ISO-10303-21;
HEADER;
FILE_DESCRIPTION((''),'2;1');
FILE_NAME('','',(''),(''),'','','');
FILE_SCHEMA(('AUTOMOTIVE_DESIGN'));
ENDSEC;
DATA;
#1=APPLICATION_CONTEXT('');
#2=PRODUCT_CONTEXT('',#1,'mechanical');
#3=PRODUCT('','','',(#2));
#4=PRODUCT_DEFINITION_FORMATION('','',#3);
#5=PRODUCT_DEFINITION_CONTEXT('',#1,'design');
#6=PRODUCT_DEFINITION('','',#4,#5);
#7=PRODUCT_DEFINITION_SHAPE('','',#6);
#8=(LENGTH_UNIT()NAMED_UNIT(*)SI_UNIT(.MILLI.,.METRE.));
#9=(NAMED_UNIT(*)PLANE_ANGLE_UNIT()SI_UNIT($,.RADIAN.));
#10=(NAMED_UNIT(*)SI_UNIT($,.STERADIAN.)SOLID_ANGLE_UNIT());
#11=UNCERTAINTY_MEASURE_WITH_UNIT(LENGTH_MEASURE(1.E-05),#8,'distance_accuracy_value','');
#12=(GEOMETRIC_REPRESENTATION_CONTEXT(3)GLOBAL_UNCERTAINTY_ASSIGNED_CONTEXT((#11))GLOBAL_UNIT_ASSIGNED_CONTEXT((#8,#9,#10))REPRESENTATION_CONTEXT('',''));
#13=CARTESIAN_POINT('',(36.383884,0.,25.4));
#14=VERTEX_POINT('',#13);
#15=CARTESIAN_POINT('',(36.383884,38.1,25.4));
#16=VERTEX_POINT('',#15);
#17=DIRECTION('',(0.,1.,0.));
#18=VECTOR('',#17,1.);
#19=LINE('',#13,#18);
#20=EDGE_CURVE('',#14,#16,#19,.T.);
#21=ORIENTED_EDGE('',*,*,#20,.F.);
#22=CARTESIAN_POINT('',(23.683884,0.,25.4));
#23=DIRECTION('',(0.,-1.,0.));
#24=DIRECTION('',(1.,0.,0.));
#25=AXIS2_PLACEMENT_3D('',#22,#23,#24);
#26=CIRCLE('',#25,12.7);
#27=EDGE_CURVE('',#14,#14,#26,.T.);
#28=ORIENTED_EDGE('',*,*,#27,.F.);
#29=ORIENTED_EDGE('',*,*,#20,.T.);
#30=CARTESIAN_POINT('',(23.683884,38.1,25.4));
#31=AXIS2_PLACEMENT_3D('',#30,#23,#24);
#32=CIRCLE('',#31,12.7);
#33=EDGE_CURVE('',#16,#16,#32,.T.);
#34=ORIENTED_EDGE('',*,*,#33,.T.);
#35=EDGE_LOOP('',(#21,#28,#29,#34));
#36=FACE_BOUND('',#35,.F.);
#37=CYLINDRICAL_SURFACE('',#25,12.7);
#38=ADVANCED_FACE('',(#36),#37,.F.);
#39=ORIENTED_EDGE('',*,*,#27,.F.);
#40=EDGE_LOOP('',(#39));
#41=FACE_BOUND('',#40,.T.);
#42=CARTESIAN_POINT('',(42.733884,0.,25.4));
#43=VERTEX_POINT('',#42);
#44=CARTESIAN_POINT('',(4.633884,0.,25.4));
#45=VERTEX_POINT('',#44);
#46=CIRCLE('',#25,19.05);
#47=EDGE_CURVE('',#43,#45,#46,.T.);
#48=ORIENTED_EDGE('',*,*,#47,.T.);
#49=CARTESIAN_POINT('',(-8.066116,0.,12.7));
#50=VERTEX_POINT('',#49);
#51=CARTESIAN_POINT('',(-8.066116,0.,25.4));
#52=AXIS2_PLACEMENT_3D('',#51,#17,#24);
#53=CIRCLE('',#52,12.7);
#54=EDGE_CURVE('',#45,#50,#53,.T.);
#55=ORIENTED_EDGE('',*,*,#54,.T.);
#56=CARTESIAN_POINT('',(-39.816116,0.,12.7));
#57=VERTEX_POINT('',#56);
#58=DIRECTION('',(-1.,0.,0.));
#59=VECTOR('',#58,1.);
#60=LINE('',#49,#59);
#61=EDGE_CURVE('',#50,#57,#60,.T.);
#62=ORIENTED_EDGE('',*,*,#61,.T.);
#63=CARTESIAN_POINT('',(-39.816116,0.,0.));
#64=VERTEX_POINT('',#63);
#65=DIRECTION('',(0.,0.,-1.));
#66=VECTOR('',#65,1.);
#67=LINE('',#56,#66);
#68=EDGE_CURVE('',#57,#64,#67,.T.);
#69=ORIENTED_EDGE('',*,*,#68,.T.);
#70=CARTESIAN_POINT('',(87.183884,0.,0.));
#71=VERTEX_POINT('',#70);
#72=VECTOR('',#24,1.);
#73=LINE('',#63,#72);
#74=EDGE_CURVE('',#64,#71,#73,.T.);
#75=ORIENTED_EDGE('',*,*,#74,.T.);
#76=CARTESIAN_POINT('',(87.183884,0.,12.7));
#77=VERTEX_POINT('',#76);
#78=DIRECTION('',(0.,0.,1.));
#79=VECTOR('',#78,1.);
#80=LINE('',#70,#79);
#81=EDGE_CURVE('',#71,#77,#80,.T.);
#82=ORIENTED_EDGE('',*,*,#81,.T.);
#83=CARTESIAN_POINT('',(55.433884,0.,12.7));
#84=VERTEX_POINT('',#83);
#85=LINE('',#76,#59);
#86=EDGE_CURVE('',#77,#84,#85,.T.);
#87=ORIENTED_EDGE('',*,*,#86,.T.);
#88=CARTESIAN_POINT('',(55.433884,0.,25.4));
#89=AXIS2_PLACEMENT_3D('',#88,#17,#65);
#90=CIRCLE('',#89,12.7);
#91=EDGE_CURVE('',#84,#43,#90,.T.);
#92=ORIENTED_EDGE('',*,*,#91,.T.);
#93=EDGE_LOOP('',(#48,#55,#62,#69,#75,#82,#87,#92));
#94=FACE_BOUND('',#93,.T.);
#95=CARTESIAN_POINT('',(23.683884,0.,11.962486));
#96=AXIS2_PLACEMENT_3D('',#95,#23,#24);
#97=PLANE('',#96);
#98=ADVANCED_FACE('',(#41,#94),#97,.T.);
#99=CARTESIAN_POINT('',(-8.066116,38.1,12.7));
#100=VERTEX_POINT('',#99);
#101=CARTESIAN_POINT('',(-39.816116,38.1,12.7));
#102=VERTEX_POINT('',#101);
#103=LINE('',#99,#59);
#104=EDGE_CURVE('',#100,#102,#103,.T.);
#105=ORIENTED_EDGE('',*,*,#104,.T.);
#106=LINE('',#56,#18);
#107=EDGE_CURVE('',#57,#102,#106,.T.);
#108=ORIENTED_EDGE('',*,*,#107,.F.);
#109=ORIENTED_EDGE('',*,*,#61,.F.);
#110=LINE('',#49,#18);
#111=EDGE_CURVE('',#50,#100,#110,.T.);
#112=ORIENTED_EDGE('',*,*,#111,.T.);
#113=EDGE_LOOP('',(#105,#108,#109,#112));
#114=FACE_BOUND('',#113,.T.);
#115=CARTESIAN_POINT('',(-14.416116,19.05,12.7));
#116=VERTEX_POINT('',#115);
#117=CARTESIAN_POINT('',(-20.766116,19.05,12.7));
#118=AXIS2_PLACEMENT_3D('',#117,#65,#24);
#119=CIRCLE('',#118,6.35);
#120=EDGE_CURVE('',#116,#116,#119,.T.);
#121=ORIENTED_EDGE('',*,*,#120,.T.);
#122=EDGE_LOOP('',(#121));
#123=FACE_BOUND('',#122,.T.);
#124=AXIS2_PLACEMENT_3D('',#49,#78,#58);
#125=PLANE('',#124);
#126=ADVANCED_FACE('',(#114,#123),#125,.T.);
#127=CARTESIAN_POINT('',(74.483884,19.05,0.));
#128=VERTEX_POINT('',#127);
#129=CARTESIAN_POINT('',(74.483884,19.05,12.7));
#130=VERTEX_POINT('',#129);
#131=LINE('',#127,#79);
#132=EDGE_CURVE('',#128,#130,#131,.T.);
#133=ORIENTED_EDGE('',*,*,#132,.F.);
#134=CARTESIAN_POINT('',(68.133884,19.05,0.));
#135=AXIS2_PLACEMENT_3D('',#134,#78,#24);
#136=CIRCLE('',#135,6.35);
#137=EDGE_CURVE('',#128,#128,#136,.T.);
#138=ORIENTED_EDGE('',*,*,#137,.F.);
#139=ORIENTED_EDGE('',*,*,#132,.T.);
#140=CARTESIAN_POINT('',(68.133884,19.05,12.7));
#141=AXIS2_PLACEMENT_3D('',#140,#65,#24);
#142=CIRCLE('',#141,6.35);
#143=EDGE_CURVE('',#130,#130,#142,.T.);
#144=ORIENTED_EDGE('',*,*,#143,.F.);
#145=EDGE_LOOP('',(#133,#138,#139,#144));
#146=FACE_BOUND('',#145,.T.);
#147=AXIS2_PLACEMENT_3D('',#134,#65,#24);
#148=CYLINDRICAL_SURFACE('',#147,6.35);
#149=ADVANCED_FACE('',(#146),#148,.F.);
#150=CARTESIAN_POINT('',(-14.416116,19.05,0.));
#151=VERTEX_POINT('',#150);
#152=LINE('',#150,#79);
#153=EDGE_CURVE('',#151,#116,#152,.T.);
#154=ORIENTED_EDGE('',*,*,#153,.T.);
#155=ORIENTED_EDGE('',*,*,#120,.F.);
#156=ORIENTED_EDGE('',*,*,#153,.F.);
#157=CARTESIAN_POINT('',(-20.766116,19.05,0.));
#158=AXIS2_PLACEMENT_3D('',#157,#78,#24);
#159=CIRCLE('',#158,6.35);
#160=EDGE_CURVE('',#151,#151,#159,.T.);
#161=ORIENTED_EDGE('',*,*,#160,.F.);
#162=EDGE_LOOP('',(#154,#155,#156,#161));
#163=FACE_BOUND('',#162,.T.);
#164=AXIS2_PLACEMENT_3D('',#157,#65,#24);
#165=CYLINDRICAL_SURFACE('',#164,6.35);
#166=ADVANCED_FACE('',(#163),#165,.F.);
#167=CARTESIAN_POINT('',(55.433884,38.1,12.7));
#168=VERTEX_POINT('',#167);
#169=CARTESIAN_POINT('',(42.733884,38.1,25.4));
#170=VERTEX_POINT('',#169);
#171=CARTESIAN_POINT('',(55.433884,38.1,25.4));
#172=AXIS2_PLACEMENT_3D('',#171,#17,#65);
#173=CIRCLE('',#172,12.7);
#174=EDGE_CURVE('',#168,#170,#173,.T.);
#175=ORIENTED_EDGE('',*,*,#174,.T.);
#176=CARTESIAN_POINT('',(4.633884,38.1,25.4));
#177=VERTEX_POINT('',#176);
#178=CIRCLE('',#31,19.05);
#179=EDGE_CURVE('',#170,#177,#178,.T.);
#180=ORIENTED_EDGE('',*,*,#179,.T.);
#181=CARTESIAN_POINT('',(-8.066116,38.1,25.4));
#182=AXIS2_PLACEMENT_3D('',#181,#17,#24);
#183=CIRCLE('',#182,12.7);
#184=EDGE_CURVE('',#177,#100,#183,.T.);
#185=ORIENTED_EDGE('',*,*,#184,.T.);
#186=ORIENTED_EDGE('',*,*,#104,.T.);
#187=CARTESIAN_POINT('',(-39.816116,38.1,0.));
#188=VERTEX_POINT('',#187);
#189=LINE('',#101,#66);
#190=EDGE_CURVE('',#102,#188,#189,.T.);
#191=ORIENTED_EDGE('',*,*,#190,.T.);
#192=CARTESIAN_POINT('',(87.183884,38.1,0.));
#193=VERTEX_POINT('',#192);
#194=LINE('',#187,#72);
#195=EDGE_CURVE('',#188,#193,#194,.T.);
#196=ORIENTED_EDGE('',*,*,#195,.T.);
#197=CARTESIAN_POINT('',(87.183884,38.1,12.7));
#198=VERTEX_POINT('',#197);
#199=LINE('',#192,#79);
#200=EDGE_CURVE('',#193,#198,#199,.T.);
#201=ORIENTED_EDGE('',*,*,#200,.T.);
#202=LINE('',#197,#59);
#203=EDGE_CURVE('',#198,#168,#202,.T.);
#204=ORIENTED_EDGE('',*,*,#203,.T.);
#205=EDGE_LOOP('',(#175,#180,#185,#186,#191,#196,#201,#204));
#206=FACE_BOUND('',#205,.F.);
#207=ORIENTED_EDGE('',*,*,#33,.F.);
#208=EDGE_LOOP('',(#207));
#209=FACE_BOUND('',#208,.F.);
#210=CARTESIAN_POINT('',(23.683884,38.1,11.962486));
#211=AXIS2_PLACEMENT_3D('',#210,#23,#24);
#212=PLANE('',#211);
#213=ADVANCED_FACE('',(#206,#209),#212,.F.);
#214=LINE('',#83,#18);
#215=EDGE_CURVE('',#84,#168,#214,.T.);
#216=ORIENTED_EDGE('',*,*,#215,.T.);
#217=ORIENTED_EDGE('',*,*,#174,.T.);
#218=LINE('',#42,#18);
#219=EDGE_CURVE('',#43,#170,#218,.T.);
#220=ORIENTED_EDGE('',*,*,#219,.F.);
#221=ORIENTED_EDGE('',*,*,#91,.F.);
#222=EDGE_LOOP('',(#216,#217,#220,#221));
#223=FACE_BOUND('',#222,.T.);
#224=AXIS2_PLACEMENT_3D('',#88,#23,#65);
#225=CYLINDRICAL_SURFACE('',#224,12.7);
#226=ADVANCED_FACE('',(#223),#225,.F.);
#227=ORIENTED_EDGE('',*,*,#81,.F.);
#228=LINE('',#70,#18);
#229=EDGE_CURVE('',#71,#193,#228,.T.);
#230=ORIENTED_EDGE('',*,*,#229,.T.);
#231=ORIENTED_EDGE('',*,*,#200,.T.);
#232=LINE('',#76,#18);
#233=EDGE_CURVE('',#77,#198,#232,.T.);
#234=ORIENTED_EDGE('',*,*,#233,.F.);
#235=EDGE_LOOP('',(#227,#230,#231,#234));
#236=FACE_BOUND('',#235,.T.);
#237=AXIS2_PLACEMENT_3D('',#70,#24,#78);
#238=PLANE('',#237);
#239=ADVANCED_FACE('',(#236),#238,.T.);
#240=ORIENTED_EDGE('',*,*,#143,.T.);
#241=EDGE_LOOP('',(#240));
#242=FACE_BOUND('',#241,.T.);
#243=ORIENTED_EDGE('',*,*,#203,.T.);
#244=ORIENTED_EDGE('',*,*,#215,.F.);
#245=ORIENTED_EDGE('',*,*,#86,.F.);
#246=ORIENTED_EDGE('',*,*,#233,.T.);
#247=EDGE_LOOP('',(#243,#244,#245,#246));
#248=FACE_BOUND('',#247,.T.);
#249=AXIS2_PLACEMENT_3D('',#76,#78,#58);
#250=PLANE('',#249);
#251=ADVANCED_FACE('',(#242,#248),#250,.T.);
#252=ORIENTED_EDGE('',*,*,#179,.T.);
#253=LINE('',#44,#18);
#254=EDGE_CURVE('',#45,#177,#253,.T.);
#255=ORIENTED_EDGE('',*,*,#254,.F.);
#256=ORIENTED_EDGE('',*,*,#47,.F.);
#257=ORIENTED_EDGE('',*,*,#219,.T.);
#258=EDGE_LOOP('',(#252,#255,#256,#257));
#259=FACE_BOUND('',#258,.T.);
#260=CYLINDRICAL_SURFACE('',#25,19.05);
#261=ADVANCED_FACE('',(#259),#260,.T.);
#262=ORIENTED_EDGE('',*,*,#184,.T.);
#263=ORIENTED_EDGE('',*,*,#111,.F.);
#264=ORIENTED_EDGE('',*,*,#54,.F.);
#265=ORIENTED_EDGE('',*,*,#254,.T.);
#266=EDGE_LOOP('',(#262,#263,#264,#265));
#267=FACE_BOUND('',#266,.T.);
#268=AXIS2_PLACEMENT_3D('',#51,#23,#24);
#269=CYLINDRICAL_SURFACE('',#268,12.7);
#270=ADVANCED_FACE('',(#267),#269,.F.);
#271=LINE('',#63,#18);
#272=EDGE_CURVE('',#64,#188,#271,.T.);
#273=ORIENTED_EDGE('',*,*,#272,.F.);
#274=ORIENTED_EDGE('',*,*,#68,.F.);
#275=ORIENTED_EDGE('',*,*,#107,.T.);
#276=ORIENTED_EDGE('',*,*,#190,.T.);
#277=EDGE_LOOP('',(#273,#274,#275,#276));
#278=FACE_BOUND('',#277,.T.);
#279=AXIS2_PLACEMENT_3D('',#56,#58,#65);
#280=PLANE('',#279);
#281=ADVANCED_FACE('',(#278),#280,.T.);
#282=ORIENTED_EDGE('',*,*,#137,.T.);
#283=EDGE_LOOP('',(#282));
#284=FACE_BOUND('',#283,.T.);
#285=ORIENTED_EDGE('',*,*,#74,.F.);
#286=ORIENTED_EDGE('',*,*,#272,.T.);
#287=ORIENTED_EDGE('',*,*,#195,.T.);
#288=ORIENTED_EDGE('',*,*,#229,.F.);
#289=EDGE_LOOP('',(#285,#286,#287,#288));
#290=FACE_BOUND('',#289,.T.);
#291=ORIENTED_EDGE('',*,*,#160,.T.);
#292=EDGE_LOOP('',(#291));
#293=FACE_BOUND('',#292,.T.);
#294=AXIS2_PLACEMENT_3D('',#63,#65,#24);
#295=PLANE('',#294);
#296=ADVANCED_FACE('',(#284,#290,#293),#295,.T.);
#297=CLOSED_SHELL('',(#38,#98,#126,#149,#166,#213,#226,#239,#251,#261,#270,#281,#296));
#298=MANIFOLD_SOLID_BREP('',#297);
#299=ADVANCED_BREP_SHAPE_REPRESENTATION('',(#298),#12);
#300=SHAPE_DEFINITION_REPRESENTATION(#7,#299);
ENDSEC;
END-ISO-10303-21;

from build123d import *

# Parameters (mm, degrees)
F0_R     = 12.7
F1_DEPTH = 38.1
F2_R     = 6.35
F3_DEPTH = 25.4


# Not quite as in the source:
# - a feature names something its author has since deleted; it is built from what else it names


with BuildPart() as f1:
    # F0 (on Front) → F1 (new body)
    with BuildSketch(Plane.XZ):
        with BuildLine():
            Line((-39.8161155887, 12.7), (-39.8161155887, 0))
            Line((-39.8161155887, 0), (87.1838844113, 0))
            Line((87.1838844113, 0), (87.1838844113, 12.7))
            Line((87.1838844113, 12.7), (55.4338844113, 12.7))
            ThreePointArc((55.4338844113, 12.7), (46.4536282902, 16.4197438789), (42.7338844113, 25.4))
            ThreePointArc((42.7338844113, 25.4), (23.6838844113, 44.45), (4.6338844113, 25.4))
            ThreePointArc((4.6338844113, 25.4), (0.9141405324, 16.4197438789), (-8.0661155887, 12.7))
            Line((-8.0661155887, 12.7), (-39.8161155887, 12.7))
        make_face()
        with Locations((23.6838844113, 25.4)):
            Circle(F0_R, mode=Mode.SUBTRACT)
    extrude(amount=-F1_DEPTH)

    # F2 (on Top) → F3 (cut)
    with BuildSketch(Plane.XY):
        with Locations((-20.7661155887, 19.05)):
            Circle(F2_R)
        with Locations((68.1338844113, 19.05)):
            Circle(F2_R)
    extrude(amount=F3_DEPTH, mode=Mode.SUBTRACT)


solid = f1.part
